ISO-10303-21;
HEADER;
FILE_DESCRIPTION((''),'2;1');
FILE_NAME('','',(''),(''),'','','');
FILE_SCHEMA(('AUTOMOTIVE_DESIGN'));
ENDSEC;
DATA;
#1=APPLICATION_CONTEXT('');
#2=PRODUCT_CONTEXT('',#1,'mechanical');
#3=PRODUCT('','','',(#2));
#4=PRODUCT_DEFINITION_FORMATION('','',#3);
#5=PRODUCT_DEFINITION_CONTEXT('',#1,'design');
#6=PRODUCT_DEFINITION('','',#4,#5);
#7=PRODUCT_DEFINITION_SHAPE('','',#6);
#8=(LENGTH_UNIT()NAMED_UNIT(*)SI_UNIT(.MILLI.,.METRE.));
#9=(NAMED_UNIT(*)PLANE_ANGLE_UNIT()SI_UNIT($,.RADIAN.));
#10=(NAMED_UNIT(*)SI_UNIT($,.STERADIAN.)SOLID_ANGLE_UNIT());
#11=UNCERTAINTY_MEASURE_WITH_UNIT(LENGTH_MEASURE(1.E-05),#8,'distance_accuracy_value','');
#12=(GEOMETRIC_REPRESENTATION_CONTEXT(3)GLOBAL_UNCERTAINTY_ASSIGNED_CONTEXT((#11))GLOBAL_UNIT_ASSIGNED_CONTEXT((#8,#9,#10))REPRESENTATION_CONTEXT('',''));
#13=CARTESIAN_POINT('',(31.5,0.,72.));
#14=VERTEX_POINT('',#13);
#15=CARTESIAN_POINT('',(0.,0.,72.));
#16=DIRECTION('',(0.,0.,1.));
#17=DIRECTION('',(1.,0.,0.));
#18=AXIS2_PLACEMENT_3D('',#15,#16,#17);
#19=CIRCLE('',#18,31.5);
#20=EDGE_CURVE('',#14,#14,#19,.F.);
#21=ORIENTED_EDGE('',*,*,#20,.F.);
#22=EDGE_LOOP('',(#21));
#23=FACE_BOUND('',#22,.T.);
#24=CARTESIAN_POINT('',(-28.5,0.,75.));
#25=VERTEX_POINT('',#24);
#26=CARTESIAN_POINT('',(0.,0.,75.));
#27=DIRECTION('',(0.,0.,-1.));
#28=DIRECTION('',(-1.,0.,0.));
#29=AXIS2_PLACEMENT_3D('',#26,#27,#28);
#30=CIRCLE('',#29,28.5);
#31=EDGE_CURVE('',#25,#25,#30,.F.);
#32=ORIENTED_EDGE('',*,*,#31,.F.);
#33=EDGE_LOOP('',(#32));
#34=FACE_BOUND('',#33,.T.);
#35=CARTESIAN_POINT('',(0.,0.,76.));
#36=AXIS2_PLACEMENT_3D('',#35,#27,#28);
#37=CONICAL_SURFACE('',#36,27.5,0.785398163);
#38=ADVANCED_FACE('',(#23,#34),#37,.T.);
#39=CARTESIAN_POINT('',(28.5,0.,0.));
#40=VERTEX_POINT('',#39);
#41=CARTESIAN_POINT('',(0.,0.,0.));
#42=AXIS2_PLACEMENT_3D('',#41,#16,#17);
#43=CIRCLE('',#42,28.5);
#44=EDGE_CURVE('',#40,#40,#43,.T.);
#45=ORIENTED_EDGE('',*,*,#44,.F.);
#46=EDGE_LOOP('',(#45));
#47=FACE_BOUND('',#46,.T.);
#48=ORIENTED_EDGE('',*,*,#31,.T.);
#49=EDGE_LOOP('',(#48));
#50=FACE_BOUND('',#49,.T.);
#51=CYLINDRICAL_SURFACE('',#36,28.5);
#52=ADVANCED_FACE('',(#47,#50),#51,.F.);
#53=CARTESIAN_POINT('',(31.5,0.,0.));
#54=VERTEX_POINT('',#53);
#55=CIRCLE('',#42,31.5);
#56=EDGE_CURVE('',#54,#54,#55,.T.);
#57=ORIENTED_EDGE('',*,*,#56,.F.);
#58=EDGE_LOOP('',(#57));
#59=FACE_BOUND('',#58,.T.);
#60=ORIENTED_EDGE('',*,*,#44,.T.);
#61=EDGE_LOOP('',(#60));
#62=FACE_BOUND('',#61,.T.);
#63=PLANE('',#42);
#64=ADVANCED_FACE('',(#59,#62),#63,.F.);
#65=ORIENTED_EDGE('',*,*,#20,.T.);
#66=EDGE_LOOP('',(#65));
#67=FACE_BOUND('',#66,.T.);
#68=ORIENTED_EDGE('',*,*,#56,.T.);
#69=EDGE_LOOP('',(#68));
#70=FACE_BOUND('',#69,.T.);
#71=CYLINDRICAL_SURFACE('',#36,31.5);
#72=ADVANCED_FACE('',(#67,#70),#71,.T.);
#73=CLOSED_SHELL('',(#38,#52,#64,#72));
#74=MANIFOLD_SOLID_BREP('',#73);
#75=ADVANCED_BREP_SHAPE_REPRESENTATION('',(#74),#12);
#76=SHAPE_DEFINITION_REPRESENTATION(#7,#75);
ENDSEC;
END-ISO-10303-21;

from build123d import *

# Parameters (mm, degrees)
ESQUISSE1_R        = 31.5
ESQUISSE1_R_2      = 28.5
BOSS_EXTRU_1_DEPTH = 76
CHANFREIN1_SIZE    = 4


with BuildPart() as part:
    # Esquisse1 → Boss.-Extru.1 (new body)
    with BuildSketch(Plane.XY):
        Circle(ESQUISSE1_R)
        Circle(ESQUISSE1_R_2, mode=Mode.SUBTRACT)
    extrude(amount=BOSS_EXTRU_1_DEPTH)

    # Chanfrein1
    # the kernel refuses this chamfer: 4 mm, written as the material it takes off along each edge
    with BuildSketch(Plane(origin=(0, 0, 76), x_dir=(1, 0, 0), z_dir=(0, -1, 0))) as chanfrein1_piece_1:
        Polygon((31.5, -CHANFREIN1_SIZE), (31.5 - CHANFREIN1_SIZE, 0), (31.5, 0), align=None)
    revolve(axis=Axis((0, 0, 76), (0, 0, 1)), mode=Mode.SUBTRACT)


solid = part.part
